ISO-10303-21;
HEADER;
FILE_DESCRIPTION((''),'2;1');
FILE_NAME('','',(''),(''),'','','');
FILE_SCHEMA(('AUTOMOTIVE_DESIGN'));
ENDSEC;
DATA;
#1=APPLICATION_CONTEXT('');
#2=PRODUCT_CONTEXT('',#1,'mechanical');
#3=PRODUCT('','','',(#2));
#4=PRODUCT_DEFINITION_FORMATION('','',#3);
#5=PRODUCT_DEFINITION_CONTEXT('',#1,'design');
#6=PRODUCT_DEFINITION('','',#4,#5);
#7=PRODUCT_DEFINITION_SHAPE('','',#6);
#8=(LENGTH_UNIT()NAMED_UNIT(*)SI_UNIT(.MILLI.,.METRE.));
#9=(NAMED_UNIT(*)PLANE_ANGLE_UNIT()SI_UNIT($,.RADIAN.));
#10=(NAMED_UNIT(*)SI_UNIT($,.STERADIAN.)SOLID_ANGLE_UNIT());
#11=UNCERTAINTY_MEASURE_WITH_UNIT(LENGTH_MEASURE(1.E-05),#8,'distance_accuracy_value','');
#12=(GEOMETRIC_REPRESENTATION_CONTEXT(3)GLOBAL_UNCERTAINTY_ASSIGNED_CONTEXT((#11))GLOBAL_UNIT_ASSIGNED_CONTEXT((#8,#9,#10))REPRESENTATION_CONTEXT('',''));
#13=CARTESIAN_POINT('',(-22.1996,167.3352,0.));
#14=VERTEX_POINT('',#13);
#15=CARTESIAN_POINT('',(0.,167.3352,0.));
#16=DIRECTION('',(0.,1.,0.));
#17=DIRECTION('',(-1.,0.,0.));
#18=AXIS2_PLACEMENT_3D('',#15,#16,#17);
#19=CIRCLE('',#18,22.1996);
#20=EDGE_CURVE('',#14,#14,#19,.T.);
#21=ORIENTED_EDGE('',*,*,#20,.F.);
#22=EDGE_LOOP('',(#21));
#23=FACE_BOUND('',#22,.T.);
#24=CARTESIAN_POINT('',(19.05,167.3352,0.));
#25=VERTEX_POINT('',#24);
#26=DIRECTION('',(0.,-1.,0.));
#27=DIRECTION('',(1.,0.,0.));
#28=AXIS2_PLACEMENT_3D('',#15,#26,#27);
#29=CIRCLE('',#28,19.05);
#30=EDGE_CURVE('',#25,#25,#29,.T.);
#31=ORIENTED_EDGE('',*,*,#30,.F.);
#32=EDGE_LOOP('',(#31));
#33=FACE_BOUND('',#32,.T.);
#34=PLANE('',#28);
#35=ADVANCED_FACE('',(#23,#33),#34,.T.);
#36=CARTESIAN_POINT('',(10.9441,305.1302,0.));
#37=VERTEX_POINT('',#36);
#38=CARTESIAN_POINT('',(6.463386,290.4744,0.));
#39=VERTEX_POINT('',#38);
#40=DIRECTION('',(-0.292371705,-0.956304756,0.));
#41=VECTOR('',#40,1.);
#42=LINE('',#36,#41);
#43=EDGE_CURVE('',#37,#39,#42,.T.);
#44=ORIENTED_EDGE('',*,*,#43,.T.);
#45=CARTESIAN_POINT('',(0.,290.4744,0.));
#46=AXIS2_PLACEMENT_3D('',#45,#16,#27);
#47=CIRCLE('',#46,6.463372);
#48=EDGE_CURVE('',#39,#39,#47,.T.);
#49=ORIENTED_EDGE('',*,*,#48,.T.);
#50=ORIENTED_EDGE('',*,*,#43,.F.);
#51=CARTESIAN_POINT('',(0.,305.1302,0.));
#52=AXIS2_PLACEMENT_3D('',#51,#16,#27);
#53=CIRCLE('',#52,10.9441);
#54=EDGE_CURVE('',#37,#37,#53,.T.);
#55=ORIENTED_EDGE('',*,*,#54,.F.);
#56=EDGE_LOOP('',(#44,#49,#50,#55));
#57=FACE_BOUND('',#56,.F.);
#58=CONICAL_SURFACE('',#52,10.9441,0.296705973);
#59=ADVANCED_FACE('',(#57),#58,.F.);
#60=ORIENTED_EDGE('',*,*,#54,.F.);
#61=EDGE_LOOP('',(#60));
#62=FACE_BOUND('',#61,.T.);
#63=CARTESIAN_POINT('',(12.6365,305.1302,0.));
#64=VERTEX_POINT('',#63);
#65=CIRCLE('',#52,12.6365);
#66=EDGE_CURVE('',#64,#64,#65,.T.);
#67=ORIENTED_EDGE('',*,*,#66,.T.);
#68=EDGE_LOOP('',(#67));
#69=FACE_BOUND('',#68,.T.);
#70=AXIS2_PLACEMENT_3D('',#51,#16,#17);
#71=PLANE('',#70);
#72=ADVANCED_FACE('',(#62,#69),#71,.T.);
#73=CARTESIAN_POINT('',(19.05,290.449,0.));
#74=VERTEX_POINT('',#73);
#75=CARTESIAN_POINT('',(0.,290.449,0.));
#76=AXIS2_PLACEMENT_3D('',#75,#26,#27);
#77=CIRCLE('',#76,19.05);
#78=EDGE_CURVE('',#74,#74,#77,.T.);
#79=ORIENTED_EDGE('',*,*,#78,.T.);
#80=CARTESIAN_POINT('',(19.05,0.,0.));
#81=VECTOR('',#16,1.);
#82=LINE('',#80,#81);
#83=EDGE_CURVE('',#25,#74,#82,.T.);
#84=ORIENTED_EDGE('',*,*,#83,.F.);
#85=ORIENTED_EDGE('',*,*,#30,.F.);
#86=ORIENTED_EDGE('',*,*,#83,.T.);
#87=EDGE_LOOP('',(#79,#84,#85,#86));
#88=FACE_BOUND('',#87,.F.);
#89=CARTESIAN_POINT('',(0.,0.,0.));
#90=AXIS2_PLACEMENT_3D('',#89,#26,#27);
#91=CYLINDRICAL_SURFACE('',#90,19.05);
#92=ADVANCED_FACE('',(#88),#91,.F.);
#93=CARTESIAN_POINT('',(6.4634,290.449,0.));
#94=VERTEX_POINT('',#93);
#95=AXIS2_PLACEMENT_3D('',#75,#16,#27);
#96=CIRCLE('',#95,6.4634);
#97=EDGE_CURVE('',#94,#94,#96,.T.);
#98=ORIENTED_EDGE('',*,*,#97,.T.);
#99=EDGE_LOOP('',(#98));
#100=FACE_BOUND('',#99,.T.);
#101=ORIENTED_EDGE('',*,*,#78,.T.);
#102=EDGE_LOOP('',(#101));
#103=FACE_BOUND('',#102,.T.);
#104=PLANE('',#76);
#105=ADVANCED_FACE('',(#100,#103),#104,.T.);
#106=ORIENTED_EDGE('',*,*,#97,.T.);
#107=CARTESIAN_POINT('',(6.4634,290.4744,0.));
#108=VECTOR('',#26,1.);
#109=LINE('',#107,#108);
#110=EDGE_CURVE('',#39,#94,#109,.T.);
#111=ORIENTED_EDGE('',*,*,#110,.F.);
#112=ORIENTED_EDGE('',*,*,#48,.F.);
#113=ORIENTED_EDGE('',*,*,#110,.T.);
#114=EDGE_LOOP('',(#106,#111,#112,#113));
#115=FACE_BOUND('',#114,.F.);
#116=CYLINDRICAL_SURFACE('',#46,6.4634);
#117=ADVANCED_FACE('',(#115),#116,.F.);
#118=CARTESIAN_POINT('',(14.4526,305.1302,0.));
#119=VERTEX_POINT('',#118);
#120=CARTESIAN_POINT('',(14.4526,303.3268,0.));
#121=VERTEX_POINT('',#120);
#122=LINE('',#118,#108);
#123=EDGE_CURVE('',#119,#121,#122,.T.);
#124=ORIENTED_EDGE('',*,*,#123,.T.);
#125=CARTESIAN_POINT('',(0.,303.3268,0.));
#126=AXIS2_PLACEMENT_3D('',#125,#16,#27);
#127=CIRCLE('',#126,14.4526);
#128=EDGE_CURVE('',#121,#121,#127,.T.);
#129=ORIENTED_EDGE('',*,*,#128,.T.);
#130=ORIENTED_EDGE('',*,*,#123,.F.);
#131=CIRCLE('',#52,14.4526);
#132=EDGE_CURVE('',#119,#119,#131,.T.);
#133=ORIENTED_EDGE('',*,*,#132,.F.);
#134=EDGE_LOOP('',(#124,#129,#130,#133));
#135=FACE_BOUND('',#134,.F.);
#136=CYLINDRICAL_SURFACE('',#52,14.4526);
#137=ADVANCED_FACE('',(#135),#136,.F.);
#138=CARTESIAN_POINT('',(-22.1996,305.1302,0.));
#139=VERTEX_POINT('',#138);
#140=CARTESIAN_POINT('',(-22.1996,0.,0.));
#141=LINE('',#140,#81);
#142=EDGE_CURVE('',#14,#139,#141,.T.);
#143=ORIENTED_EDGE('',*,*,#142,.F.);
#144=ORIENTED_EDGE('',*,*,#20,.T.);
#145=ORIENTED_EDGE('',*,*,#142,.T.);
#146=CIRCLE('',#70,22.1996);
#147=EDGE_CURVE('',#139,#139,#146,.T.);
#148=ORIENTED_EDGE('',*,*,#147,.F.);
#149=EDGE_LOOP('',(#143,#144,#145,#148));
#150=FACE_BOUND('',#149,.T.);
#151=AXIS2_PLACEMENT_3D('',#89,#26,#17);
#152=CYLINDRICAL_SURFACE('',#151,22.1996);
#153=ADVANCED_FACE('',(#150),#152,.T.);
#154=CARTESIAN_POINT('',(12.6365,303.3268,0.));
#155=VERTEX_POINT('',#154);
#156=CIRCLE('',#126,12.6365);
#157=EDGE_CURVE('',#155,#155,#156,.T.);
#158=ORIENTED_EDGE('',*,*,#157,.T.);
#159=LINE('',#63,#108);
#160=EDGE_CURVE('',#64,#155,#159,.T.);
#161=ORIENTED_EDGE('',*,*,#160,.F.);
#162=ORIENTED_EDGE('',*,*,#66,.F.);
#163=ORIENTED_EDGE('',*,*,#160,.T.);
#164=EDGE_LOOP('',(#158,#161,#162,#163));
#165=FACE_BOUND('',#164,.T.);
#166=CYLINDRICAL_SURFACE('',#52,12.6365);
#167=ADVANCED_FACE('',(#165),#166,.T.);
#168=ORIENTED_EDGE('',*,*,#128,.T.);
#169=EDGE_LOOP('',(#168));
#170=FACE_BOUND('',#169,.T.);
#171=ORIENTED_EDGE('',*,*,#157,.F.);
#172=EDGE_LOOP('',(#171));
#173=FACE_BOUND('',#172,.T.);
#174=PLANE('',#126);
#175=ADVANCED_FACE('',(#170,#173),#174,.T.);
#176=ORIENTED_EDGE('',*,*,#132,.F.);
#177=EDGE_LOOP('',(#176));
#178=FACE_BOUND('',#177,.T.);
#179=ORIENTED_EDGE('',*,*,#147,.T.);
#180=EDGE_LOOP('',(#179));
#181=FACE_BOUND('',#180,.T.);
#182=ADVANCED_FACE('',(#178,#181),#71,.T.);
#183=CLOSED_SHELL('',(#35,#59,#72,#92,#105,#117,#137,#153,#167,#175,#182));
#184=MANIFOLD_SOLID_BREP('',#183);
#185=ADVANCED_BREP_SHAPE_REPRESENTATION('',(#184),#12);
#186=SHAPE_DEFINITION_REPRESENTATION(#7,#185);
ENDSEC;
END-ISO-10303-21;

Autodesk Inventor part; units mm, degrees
ref_plane "YZ Plane" through (0, 0, 0) normal (1, 0, 0) x (0, 1, 0)
ref_plane "XZ Plane" through (0, 0, 0) normal (0, 1, 0) x (-1, 0, 0)
ref_plane "XY Plane" through (0, 0, 0) normal (0, 0, 1) x (1, 0, 0)
sketch "Sketch1" plane through (0, 0, 0) normal (0, 1, 0) x (-1, 0, 0)
  circle A0 centre (0, 0) radius 22.1996
  dimension "d0" = 44.3992
extrude "Extrusion1" add sketch "Sketch1" along normal blind 305.1302
sketch "Sketch2" plane through (0, 305.1302, 0) normal (0, 1, 0) x (1, 0, 0)
  circle A0 centre (0, 0) radius 14.4526
  circle A1 centre (0, 0) radius 12.6365
  dimension "d3" = 28.9052
  dimension "d4" = 25.273
extrude "Extrusion2" cut sketch "Sketch2" against normal blind 1.8034
sketch "Sketch3" plane through (0, 305.1302, 0) normal (0, 1, 0) x (1, 0, 0)
  circle A0 centre (0, 0) radius 10.9441
  circle A1 centre (0, 0) radius 12.6365 projected
  dimension "d7" = 1.6924
extrude "Extrusion3" cut sketch "Sketch3" against normal blind 14.6558 draft -17 contours A0
sketch "Sketch5" plane through (0, 290.4744, 0) normal (0, 1, 0) x (1, 0, 0)
  circle A0 centre (0, 0) radius 6.4634
extrude "Extrusion4" cut sketch "Sketch5" against normal blind 355.6
sketch "Sketch6" plane through (0, 0, 0) normal (0, -1, 0) x (1, 0, 0)
  circle A0 centre (0, 0) radius 19.05
  circle A1 centre (0, 0) radius 22.1996
  dimension "d13" = 38.1
  dimension "d14" = 44.3992
extrude "Extrusion5" cut sketch "Sketch6" against normal blind 290.449 contours A0
sketch "Sketch7" plane through (0, 0, 0) normal (0, -1, 0) x (1, 0, 0)
  circle A0 centre (0, 0) radius 22.1996
extrude "Extrusion6" cut sketch "Sketch7" against normal blind 167.3352
sketch "Sketch8" plane through (0, 305.1302, 0) normal (0, 1, 0) x (1, 0, 0)
  point P0 (0, 0)
  point P1 (18.415, 0)
  point P2 (9.2075, 15.9479)
  point P3 (-9.2075, 15.9479)
  point P4 (-18.415, 0)
  point P5 (-9.2075, -15.9479)
  point P6 (9.2075, -15.9479)
  dimension "d19" = 18.415
  dimension "d22" = 360
properties part number "LED holder Thing"
